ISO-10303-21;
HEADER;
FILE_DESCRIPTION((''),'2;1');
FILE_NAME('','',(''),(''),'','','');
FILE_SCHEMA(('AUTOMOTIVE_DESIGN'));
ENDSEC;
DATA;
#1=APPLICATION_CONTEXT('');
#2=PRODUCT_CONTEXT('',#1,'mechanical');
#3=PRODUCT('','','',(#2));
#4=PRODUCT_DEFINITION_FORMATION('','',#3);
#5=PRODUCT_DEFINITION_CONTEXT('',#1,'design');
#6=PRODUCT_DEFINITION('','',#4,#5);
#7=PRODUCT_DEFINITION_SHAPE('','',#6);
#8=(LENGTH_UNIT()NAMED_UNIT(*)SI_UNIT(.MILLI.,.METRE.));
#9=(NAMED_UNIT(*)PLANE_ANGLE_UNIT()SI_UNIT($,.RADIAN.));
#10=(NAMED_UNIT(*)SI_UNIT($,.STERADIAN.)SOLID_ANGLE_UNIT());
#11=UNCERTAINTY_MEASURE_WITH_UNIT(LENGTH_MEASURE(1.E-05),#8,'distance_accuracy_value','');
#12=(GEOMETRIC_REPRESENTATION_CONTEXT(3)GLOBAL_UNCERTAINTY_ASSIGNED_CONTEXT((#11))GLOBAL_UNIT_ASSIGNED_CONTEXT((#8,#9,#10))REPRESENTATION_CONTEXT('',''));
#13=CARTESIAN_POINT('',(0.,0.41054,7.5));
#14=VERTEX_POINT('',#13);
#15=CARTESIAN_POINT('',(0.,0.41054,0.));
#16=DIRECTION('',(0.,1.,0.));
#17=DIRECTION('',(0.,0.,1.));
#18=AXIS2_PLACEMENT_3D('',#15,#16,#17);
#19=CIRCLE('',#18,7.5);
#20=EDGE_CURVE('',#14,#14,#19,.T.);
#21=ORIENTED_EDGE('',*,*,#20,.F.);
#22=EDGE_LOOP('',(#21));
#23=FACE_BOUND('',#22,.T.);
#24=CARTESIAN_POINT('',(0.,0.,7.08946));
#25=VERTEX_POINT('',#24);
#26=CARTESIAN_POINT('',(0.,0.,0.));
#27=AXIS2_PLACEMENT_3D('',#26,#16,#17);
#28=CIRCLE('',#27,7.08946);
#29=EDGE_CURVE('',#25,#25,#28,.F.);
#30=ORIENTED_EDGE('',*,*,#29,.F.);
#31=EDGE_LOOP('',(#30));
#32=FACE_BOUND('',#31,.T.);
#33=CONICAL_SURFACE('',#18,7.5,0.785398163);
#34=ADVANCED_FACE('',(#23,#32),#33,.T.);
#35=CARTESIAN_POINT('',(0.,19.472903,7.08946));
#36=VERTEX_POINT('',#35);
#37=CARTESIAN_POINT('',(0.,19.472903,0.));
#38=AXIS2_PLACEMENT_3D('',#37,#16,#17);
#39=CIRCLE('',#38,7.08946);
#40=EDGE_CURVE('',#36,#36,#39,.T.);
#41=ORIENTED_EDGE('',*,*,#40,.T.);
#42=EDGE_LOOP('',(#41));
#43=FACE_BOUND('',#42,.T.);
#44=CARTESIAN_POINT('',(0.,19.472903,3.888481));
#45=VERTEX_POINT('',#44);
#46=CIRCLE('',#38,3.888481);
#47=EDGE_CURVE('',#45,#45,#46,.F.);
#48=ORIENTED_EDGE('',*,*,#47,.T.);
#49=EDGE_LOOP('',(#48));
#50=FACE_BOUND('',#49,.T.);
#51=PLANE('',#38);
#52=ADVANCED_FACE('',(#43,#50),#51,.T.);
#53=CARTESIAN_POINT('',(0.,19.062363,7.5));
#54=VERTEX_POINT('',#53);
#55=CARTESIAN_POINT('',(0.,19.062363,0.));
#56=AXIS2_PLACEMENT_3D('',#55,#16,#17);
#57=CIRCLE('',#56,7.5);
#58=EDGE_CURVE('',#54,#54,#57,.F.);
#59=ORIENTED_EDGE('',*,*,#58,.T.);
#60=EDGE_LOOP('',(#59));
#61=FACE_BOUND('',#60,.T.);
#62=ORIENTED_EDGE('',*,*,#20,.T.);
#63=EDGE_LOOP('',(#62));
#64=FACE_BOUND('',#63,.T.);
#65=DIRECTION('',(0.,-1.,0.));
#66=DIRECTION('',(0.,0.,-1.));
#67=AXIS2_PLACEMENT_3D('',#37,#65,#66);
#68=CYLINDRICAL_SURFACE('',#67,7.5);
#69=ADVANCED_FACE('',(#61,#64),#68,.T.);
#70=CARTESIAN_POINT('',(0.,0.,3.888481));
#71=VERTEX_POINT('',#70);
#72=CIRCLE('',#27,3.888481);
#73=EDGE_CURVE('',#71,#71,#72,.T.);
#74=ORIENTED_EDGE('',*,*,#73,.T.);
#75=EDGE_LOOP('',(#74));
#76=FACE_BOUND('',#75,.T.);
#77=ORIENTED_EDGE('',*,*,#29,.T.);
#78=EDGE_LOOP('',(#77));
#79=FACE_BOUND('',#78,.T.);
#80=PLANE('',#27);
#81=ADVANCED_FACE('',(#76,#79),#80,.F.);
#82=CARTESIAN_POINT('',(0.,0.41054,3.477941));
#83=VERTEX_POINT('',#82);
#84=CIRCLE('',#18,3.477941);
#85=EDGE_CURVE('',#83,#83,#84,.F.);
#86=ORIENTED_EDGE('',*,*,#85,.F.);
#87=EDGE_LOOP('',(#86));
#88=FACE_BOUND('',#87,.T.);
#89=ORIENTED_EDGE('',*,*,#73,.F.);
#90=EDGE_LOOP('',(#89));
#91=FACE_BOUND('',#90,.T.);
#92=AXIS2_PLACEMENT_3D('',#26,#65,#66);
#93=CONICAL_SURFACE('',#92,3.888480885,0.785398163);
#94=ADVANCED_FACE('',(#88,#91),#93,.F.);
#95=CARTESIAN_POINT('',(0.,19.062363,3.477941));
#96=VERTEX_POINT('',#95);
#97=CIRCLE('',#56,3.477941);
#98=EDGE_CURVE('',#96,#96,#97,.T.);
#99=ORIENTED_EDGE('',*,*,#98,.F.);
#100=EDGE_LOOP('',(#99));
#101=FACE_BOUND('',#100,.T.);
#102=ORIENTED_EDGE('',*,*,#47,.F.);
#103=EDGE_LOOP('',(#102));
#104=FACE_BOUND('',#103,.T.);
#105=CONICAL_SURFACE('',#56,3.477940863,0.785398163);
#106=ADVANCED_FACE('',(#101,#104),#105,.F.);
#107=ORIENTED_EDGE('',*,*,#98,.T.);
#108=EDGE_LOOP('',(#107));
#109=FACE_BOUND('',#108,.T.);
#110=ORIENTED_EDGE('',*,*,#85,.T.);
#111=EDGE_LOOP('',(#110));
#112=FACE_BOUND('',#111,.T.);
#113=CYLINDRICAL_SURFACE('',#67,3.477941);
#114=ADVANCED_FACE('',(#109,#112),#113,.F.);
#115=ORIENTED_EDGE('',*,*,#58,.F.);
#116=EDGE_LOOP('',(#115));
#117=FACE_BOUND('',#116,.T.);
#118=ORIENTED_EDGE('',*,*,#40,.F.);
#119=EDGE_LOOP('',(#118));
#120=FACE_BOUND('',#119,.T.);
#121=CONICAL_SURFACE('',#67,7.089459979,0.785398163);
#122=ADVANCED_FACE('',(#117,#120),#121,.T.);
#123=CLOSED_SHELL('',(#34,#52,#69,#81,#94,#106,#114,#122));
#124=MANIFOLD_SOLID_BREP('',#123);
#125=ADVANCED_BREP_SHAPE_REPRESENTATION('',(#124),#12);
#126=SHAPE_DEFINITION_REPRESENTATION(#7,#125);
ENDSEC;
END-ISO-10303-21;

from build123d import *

# Parameters (mm, degrees)
SKETCH1_R           = 7.5
BOSS_EXTRUDE1_DEPTH = 19.472903196
SKETCH2_R           = 3.477940863
CUT_EXTRUDE1_DEPTH  = 23.17417324
CHAMFER1_SIZE       = 0.410540021


with BuildPart() as part:
    # Sketch1 → Boss-Extrude1 (new body)
    with BuildSketch(Plane(origin=(0, 0, 0), x_dir=(1, 0, 0), z_dir=(0, 1, 0))):
        Circle(SKETCH1_R)
    extrude(amount=BOSS_EXTRUDE1_DEPTH)

    # Sketch2 → Cut-Extrude1 (cut, through all)
    with BuildSketch(Plane(origin=(0, 0, 0), x_dir=(1, 0, 0), z_dir=(0, 1, 0))):
        Circle(SKETCH2_R)
    extrude(amount=CUT_EXTRUDE1_DEPTH, mode=Mode.SUBTRACT)

    # Chamfer1
    chamfer1_edges = [part.edges().sort_by_distance(p)[0] for p in [
        (-3.477940863, 19.472903196, 0),
        (-3.477940863, 0, 0),
        (-7.5, 0, 0),
        (-7.5, 19.472903196, 0),
    ]]
    chamfer(chamfer1_edges, length=CHAMFER1_SIZE)


solid = part.part
